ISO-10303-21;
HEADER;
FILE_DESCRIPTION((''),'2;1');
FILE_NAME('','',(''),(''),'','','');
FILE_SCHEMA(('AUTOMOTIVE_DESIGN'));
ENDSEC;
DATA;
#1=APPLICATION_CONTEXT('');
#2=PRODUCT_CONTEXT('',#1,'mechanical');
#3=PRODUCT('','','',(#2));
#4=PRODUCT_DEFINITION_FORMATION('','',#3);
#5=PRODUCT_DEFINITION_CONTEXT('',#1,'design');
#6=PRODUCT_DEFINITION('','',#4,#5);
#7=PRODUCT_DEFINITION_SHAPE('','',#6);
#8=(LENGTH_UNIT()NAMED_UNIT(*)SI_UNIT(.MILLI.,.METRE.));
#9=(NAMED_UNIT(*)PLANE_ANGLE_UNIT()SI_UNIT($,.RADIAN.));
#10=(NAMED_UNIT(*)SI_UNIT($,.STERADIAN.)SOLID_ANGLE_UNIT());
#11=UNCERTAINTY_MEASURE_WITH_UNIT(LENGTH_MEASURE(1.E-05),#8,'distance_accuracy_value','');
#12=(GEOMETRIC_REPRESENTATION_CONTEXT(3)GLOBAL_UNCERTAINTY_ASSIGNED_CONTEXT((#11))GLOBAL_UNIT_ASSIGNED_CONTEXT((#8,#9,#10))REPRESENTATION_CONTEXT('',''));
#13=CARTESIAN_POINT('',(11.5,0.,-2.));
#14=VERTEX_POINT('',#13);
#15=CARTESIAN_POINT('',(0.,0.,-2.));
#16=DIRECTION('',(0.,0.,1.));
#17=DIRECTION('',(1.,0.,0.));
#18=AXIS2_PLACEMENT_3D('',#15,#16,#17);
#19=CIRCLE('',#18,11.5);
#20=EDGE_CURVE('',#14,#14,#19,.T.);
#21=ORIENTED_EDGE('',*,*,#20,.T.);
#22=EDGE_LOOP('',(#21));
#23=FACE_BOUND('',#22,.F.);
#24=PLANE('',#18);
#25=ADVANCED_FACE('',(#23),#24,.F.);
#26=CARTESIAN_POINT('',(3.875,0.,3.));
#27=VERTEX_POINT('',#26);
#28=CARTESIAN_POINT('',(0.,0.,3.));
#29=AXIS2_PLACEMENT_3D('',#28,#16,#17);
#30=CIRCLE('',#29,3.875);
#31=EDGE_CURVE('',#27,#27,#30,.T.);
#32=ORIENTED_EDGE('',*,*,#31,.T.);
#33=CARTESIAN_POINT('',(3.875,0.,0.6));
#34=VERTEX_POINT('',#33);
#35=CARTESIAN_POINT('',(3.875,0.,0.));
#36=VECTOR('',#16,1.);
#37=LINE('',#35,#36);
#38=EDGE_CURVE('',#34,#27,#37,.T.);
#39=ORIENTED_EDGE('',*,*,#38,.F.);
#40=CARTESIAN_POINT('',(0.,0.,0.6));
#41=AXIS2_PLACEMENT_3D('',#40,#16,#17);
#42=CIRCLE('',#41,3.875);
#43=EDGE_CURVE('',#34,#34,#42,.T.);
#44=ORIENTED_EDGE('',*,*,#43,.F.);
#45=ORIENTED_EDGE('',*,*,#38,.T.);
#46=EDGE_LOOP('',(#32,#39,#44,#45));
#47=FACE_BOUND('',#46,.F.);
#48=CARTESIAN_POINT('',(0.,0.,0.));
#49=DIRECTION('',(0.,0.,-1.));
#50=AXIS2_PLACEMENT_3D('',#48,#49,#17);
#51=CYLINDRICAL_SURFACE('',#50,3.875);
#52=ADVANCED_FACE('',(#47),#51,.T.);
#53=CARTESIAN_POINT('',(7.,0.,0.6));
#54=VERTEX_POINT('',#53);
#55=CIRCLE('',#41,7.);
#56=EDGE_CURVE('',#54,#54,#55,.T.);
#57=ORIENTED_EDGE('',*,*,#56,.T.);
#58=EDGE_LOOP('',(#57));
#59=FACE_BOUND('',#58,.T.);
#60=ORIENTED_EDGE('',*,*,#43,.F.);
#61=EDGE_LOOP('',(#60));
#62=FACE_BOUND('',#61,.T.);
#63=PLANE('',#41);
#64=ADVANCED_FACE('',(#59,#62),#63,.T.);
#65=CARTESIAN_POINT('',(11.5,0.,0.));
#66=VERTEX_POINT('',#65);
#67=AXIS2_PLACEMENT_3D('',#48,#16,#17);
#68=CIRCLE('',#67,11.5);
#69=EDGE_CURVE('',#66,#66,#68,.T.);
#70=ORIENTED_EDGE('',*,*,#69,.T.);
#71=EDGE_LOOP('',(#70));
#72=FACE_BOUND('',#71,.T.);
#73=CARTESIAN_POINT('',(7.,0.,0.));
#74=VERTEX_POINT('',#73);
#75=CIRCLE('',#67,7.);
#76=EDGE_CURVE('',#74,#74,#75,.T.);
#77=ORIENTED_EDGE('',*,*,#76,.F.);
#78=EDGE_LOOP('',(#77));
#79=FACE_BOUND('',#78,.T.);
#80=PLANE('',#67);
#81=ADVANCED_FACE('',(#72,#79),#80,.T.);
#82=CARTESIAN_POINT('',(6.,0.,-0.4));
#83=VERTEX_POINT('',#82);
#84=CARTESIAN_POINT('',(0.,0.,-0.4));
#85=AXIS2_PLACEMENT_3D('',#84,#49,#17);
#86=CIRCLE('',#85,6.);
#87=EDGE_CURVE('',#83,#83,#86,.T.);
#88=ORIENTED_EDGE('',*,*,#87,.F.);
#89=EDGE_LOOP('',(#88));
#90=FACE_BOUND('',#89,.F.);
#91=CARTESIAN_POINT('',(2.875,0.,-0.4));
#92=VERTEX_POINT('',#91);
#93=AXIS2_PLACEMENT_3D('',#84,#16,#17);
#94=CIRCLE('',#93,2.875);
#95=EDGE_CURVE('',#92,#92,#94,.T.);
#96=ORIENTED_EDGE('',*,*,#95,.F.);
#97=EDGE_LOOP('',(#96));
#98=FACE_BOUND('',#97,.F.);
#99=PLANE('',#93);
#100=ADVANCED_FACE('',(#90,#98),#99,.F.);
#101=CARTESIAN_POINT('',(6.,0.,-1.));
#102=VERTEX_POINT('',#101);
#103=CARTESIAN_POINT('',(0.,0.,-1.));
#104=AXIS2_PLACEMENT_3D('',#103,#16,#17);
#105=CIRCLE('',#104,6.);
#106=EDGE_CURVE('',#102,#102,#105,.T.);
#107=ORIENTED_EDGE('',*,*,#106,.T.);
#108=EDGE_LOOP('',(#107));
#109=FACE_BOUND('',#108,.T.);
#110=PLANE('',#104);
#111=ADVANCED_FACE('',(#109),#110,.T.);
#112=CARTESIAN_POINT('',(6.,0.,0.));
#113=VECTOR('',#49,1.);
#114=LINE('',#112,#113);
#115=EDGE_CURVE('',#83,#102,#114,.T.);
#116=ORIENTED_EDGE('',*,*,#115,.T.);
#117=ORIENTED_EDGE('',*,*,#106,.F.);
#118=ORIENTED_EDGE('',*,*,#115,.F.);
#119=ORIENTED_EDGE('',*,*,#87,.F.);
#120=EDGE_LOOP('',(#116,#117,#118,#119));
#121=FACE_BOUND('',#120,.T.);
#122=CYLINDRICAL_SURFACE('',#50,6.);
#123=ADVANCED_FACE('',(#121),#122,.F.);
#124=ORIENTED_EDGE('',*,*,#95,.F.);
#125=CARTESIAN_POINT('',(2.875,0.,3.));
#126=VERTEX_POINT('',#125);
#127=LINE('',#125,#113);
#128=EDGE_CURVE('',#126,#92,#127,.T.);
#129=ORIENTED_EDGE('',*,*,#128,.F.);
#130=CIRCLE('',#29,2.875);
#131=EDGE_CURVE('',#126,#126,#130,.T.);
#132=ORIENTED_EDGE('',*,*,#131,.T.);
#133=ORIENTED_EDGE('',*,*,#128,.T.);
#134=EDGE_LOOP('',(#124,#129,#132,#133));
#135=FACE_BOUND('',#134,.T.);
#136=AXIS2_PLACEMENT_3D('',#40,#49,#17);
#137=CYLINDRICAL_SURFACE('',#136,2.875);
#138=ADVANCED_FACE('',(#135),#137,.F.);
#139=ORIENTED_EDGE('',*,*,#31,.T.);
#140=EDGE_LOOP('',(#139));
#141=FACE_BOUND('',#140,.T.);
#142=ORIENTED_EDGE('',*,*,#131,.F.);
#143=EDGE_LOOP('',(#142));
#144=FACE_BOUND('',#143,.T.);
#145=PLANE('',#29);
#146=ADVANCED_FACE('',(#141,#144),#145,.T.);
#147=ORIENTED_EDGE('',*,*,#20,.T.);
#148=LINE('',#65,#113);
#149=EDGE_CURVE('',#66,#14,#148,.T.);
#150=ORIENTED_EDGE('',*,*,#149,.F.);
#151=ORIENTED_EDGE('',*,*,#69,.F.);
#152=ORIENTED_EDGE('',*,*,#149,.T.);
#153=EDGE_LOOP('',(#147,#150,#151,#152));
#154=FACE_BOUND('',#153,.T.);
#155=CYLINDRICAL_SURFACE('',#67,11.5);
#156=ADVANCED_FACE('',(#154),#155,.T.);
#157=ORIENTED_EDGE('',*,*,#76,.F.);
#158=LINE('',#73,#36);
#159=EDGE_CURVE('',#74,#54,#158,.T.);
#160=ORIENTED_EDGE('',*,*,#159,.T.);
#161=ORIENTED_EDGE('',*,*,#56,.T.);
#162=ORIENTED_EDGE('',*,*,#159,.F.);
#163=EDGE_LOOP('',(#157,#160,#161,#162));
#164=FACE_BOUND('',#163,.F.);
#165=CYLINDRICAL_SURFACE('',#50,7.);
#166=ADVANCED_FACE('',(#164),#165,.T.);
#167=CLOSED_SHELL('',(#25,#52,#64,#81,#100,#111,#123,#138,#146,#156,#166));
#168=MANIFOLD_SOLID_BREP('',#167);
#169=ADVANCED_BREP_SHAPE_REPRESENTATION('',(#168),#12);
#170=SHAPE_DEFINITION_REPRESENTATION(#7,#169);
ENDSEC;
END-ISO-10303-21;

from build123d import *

# Parameters (mm, degrees)
F0_R     = 3.875
F1_DEPTH = 3
F0_R_2   = 7
F2_DEPTH = 0.6
F0_R_3   = 11.5
F3_DEPTH = 2
F4_DEPTH = 2
F6_T     = 1


# Not quite as in the source:
# - a shell that OpenCascade refuses in one call is made with other operations: the cavity is built on its own and cut out
# - the program builds the solid bodies; features that only make, move or delete a surface that nothing else refers to are left out


with BuildPart() as f1:
    # F0 (on Top) → F1 (new body)
    with BuildSketch(Plane.XY):
        Circle(F0_R)
    extrude(amount=F1_DEPTH)

    # F0 (on Top) → F2 (join)
    with BuildSketch(Plane.XY):
        Circle(F0_R_2)
        Circle(F0_R, mode=Mode.SUBTRACT)
    extrude(amount=F2_DEPTH)

    # F0 (on Top) → F3 (join)
    with BuildSketch(Plane.XY):
        Circle(F0_R_3)
        Circle(F0_R_2, mode=Mode.SUBTRACT)
        Circle(F0_R_2)
        Circle(F0_R, mode=Mode.SUBTRACT)
    extrude(amount=-F3_DEPTH)

    # F0 (on Top) → F4 (join)
    with BuildSketch(Plane.XY):
        Circle(F0_R)
    extrude(amount=-F4_DEPTH)

    # F6: shell of thickness 1, made by hand


with BuildPart() as f6_core1:
    # F6_t2: copy of F1
    add(f1.part)

    # the walls: a layer under each face that stays
    f6_faces = [f6_core1.faces().sort_by_distance(p)[0] for p in [
        (-3.875, 0, 1.8),
        (-4.6666666667, -4.6666666667, 0.6),
        (-7, 0, 0.3),
        (-7.6666666667, -7.6666666667, 0),
        (-11.5, 0, -1),
        (0, 0, -2),
    ]]
    thicken(f6_faces, amount=-F6_T, mode=Mode.SUBTRACT)

    # F6_s3 → F6_t4 (revolve, cut)
    with BuildSketch(Plane.XZ):
        Polygon((3.885, 0.61), (2.875, 0.6), (2.875, -0.4), (3.875, -0.4), align=None)
    revolve(axis=Axis((0, 0, 0.6), (0, 0, 1)), mode=Mode.SUBTRACT)

    # F6_s5 → F6_t6 (revolve, cut)
    with BuildSketch(Plane.XZ):
        Polygon((7.01, 0.01), (6, 0), (6, -1), (7, -1), align=None)
    revolve(axis=Axis((0, 0, 0), (0, 0, 1)), mode=Mode.SUBTRACT)


with BuildPart() as f1_1:
    add(f1.part)

    # what is left inside the walls is the cavity
    f6_cavity = [f6_core1.part.solids().sort_by_distance(p)[0] for p in [
        (0, -2, -0.99),
    ]]
    add(f6_cavity, mode=Mode.SUBTRACT)


solid = f1_1.part
